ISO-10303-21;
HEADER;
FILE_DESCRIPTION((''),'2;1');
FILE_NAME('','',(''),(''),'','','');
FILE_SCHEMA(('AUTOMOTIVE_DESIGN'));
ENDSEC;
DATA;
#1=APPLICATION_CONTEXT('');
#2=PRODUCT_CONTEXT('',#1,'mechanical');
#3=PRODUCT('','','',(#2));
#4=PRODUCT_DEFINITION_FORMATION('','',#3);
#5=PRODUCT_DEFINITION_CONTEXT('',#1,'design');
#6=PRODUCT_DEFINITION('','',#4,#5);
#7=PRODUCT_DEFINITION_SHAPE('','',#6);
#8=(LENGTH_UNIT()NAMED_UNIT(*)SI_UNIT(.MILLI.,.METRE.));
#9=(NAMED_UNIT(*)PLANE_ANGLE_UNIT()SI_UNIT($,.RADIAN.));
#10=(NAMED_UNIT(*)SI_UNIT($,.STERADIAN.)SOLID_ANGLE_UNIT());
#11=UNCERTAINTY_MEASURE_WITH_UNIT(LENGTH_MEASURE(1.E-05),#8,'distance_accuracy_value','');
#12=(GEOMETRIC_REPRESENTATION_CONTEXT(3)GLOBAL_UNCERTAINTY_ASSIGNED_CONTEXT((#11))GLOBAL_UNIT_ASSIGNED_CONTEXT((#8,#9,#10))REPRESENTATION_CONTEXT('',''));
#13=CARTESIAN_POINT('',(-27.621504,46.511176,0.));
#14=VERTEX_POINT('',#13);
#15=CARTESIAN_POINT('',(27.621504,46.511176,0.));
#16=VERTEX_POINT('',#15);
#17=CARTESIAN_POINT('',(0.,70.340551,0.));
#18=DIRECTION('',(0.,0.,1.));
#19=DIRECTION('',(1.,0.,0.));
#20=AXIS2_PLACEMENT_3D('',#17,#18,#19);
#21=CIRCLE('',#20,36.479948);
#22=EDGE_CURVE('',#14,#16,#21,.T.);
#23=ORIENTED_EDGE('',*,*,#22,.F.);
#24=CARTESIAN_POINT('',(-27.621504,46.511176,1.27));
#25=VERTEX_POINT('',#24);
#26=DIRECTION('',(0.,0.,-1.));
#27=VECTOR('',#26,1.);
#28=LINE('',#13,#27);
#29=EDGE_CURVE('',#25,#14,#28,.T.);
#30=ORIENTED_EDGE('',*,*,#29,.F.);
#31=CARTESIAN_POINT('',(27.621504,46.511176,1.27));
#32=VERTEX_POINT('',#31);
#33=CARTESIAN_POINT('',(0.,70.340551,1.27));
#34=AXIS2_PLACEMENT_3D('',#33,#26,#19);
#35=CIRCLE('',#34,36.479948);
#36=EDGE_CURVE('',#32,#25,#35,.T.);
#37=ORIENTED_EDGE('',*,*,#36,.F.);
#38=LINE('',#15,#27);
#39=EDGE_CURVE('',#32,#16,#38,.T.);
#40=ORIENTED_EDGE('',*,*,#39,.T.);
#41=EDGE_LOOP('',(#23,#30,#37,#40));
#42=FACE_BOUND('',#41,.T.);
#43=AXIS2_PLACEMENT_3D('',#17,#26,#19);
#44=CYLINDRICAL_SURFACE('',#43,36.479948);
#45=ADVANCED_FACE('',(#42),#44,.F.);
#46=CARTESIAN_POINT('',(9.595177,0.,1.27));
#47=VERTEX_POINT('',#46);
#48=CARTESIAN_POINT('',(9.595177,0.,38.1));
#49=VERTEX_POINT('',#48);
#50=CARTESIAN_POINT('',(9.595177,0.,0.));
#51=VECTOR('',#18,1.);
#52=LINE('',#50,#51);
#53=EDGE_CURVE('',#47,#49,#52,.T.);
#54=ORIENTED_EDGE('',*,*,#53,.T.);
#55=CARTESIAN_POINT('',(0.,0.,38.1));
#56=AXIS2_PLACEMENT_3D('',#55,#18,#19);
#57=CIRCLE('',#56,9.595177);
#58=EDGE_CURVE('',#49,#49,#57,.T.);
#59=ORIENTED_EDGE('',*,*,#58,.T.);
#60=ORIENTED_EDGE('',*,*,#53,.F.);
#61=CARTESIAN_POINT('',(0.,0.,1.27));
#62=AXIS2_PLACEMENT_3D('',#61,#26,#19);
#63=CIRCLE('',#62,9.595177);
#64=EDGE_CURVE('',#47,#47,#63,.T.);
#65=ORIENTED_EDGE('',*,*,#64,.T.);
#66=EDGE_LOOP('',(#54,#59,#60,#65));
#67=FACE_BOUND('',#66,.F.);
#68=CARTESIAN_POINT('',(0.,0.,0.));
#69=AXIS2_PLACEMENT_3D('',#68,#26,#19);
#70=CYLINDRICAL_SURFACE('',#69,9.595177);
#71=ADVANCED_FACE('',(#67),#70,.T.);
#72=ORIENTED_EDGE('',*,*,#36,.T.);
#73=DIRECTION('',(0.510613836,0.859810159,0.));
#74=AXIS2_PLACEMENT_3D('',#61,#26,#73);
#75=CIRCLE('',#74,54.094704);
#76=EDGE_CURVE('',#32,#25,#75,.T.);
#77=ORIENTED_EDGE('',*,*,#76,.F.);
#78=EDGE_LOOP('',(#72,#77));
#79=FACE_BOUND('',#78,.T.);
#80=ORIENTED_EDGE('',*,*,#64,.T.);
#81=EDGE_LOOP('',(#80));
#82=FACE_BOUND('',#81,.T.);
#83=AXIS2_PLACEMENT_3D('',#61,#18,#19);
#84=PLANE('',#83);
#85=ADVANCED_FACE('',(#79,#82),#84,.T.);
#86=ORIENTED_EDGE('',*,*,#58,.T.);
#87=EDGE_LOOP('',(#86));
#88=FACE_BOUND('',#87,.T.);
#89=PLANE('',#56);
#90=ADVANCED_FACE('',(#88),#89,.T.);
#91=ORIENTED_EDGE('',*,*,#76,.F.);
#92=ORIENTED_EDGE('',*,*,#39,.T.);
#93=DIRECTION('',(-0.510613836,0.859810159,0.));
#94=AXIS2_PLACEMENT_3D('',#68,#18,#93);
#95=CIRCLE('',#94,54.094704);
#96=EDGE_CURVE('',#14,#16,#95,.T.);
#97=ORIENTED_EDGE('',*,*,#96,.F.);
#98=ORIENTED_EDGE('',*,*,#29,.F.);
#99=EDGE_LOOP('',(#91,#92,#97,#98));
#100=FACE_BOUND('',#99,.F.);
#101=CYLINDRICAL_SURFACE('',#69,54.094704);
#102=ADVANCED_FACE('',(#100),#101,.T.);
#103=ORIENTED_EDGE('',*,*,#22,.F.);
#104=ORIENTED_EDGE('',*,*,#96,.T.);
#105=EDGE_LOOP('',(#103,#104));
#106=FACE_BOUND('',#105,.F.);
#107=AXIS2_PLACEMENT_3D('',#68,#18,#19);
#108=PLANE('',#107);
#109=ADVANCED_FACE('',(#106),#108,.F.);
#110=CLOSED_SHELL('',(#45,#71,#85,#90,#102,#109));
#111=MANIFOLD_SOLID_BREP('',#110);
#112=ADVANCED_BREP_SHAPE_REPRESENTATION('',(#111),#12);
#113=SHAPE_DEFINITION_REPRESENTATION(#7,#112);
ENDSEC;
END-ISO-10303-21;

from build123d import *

# Parameters (mm, degrees)
F0_R     = 54.0947036541
F1_DEPTH = 1.27
F2_R     = 36.4799484266
F3_DEPTH = 25.4
F4_R     = 9.5951765944
F5_DEPTH = 38.1


# Not quite as in the source:
# - the program builds the solid bodies; features that only make, move or delete a surface that nothing else refers to are left out


with BuildPart() as f1:
    # F0 (on Top) → F1 (new body)
    with BuildSketch(Plane.XY):
        Circle(F0_R)
    extrude(amount=F1_DEPTH)

    # F2 (on Top) → F3 (cut)
    with BuildSketch(Plane.XY):
        with Locations((0, 70.3405514359)):
            Circle(F2_R)
    extrude(amount=F3_DEPTH, mode=Mode.SUBTRACT)

    # F4 (on Top) → F5 (join)
    with BuildSketch(Plane.XY):
        Circle(F4_R)
    extrude(amount=F5_DEPTH)


solid = f1.part
